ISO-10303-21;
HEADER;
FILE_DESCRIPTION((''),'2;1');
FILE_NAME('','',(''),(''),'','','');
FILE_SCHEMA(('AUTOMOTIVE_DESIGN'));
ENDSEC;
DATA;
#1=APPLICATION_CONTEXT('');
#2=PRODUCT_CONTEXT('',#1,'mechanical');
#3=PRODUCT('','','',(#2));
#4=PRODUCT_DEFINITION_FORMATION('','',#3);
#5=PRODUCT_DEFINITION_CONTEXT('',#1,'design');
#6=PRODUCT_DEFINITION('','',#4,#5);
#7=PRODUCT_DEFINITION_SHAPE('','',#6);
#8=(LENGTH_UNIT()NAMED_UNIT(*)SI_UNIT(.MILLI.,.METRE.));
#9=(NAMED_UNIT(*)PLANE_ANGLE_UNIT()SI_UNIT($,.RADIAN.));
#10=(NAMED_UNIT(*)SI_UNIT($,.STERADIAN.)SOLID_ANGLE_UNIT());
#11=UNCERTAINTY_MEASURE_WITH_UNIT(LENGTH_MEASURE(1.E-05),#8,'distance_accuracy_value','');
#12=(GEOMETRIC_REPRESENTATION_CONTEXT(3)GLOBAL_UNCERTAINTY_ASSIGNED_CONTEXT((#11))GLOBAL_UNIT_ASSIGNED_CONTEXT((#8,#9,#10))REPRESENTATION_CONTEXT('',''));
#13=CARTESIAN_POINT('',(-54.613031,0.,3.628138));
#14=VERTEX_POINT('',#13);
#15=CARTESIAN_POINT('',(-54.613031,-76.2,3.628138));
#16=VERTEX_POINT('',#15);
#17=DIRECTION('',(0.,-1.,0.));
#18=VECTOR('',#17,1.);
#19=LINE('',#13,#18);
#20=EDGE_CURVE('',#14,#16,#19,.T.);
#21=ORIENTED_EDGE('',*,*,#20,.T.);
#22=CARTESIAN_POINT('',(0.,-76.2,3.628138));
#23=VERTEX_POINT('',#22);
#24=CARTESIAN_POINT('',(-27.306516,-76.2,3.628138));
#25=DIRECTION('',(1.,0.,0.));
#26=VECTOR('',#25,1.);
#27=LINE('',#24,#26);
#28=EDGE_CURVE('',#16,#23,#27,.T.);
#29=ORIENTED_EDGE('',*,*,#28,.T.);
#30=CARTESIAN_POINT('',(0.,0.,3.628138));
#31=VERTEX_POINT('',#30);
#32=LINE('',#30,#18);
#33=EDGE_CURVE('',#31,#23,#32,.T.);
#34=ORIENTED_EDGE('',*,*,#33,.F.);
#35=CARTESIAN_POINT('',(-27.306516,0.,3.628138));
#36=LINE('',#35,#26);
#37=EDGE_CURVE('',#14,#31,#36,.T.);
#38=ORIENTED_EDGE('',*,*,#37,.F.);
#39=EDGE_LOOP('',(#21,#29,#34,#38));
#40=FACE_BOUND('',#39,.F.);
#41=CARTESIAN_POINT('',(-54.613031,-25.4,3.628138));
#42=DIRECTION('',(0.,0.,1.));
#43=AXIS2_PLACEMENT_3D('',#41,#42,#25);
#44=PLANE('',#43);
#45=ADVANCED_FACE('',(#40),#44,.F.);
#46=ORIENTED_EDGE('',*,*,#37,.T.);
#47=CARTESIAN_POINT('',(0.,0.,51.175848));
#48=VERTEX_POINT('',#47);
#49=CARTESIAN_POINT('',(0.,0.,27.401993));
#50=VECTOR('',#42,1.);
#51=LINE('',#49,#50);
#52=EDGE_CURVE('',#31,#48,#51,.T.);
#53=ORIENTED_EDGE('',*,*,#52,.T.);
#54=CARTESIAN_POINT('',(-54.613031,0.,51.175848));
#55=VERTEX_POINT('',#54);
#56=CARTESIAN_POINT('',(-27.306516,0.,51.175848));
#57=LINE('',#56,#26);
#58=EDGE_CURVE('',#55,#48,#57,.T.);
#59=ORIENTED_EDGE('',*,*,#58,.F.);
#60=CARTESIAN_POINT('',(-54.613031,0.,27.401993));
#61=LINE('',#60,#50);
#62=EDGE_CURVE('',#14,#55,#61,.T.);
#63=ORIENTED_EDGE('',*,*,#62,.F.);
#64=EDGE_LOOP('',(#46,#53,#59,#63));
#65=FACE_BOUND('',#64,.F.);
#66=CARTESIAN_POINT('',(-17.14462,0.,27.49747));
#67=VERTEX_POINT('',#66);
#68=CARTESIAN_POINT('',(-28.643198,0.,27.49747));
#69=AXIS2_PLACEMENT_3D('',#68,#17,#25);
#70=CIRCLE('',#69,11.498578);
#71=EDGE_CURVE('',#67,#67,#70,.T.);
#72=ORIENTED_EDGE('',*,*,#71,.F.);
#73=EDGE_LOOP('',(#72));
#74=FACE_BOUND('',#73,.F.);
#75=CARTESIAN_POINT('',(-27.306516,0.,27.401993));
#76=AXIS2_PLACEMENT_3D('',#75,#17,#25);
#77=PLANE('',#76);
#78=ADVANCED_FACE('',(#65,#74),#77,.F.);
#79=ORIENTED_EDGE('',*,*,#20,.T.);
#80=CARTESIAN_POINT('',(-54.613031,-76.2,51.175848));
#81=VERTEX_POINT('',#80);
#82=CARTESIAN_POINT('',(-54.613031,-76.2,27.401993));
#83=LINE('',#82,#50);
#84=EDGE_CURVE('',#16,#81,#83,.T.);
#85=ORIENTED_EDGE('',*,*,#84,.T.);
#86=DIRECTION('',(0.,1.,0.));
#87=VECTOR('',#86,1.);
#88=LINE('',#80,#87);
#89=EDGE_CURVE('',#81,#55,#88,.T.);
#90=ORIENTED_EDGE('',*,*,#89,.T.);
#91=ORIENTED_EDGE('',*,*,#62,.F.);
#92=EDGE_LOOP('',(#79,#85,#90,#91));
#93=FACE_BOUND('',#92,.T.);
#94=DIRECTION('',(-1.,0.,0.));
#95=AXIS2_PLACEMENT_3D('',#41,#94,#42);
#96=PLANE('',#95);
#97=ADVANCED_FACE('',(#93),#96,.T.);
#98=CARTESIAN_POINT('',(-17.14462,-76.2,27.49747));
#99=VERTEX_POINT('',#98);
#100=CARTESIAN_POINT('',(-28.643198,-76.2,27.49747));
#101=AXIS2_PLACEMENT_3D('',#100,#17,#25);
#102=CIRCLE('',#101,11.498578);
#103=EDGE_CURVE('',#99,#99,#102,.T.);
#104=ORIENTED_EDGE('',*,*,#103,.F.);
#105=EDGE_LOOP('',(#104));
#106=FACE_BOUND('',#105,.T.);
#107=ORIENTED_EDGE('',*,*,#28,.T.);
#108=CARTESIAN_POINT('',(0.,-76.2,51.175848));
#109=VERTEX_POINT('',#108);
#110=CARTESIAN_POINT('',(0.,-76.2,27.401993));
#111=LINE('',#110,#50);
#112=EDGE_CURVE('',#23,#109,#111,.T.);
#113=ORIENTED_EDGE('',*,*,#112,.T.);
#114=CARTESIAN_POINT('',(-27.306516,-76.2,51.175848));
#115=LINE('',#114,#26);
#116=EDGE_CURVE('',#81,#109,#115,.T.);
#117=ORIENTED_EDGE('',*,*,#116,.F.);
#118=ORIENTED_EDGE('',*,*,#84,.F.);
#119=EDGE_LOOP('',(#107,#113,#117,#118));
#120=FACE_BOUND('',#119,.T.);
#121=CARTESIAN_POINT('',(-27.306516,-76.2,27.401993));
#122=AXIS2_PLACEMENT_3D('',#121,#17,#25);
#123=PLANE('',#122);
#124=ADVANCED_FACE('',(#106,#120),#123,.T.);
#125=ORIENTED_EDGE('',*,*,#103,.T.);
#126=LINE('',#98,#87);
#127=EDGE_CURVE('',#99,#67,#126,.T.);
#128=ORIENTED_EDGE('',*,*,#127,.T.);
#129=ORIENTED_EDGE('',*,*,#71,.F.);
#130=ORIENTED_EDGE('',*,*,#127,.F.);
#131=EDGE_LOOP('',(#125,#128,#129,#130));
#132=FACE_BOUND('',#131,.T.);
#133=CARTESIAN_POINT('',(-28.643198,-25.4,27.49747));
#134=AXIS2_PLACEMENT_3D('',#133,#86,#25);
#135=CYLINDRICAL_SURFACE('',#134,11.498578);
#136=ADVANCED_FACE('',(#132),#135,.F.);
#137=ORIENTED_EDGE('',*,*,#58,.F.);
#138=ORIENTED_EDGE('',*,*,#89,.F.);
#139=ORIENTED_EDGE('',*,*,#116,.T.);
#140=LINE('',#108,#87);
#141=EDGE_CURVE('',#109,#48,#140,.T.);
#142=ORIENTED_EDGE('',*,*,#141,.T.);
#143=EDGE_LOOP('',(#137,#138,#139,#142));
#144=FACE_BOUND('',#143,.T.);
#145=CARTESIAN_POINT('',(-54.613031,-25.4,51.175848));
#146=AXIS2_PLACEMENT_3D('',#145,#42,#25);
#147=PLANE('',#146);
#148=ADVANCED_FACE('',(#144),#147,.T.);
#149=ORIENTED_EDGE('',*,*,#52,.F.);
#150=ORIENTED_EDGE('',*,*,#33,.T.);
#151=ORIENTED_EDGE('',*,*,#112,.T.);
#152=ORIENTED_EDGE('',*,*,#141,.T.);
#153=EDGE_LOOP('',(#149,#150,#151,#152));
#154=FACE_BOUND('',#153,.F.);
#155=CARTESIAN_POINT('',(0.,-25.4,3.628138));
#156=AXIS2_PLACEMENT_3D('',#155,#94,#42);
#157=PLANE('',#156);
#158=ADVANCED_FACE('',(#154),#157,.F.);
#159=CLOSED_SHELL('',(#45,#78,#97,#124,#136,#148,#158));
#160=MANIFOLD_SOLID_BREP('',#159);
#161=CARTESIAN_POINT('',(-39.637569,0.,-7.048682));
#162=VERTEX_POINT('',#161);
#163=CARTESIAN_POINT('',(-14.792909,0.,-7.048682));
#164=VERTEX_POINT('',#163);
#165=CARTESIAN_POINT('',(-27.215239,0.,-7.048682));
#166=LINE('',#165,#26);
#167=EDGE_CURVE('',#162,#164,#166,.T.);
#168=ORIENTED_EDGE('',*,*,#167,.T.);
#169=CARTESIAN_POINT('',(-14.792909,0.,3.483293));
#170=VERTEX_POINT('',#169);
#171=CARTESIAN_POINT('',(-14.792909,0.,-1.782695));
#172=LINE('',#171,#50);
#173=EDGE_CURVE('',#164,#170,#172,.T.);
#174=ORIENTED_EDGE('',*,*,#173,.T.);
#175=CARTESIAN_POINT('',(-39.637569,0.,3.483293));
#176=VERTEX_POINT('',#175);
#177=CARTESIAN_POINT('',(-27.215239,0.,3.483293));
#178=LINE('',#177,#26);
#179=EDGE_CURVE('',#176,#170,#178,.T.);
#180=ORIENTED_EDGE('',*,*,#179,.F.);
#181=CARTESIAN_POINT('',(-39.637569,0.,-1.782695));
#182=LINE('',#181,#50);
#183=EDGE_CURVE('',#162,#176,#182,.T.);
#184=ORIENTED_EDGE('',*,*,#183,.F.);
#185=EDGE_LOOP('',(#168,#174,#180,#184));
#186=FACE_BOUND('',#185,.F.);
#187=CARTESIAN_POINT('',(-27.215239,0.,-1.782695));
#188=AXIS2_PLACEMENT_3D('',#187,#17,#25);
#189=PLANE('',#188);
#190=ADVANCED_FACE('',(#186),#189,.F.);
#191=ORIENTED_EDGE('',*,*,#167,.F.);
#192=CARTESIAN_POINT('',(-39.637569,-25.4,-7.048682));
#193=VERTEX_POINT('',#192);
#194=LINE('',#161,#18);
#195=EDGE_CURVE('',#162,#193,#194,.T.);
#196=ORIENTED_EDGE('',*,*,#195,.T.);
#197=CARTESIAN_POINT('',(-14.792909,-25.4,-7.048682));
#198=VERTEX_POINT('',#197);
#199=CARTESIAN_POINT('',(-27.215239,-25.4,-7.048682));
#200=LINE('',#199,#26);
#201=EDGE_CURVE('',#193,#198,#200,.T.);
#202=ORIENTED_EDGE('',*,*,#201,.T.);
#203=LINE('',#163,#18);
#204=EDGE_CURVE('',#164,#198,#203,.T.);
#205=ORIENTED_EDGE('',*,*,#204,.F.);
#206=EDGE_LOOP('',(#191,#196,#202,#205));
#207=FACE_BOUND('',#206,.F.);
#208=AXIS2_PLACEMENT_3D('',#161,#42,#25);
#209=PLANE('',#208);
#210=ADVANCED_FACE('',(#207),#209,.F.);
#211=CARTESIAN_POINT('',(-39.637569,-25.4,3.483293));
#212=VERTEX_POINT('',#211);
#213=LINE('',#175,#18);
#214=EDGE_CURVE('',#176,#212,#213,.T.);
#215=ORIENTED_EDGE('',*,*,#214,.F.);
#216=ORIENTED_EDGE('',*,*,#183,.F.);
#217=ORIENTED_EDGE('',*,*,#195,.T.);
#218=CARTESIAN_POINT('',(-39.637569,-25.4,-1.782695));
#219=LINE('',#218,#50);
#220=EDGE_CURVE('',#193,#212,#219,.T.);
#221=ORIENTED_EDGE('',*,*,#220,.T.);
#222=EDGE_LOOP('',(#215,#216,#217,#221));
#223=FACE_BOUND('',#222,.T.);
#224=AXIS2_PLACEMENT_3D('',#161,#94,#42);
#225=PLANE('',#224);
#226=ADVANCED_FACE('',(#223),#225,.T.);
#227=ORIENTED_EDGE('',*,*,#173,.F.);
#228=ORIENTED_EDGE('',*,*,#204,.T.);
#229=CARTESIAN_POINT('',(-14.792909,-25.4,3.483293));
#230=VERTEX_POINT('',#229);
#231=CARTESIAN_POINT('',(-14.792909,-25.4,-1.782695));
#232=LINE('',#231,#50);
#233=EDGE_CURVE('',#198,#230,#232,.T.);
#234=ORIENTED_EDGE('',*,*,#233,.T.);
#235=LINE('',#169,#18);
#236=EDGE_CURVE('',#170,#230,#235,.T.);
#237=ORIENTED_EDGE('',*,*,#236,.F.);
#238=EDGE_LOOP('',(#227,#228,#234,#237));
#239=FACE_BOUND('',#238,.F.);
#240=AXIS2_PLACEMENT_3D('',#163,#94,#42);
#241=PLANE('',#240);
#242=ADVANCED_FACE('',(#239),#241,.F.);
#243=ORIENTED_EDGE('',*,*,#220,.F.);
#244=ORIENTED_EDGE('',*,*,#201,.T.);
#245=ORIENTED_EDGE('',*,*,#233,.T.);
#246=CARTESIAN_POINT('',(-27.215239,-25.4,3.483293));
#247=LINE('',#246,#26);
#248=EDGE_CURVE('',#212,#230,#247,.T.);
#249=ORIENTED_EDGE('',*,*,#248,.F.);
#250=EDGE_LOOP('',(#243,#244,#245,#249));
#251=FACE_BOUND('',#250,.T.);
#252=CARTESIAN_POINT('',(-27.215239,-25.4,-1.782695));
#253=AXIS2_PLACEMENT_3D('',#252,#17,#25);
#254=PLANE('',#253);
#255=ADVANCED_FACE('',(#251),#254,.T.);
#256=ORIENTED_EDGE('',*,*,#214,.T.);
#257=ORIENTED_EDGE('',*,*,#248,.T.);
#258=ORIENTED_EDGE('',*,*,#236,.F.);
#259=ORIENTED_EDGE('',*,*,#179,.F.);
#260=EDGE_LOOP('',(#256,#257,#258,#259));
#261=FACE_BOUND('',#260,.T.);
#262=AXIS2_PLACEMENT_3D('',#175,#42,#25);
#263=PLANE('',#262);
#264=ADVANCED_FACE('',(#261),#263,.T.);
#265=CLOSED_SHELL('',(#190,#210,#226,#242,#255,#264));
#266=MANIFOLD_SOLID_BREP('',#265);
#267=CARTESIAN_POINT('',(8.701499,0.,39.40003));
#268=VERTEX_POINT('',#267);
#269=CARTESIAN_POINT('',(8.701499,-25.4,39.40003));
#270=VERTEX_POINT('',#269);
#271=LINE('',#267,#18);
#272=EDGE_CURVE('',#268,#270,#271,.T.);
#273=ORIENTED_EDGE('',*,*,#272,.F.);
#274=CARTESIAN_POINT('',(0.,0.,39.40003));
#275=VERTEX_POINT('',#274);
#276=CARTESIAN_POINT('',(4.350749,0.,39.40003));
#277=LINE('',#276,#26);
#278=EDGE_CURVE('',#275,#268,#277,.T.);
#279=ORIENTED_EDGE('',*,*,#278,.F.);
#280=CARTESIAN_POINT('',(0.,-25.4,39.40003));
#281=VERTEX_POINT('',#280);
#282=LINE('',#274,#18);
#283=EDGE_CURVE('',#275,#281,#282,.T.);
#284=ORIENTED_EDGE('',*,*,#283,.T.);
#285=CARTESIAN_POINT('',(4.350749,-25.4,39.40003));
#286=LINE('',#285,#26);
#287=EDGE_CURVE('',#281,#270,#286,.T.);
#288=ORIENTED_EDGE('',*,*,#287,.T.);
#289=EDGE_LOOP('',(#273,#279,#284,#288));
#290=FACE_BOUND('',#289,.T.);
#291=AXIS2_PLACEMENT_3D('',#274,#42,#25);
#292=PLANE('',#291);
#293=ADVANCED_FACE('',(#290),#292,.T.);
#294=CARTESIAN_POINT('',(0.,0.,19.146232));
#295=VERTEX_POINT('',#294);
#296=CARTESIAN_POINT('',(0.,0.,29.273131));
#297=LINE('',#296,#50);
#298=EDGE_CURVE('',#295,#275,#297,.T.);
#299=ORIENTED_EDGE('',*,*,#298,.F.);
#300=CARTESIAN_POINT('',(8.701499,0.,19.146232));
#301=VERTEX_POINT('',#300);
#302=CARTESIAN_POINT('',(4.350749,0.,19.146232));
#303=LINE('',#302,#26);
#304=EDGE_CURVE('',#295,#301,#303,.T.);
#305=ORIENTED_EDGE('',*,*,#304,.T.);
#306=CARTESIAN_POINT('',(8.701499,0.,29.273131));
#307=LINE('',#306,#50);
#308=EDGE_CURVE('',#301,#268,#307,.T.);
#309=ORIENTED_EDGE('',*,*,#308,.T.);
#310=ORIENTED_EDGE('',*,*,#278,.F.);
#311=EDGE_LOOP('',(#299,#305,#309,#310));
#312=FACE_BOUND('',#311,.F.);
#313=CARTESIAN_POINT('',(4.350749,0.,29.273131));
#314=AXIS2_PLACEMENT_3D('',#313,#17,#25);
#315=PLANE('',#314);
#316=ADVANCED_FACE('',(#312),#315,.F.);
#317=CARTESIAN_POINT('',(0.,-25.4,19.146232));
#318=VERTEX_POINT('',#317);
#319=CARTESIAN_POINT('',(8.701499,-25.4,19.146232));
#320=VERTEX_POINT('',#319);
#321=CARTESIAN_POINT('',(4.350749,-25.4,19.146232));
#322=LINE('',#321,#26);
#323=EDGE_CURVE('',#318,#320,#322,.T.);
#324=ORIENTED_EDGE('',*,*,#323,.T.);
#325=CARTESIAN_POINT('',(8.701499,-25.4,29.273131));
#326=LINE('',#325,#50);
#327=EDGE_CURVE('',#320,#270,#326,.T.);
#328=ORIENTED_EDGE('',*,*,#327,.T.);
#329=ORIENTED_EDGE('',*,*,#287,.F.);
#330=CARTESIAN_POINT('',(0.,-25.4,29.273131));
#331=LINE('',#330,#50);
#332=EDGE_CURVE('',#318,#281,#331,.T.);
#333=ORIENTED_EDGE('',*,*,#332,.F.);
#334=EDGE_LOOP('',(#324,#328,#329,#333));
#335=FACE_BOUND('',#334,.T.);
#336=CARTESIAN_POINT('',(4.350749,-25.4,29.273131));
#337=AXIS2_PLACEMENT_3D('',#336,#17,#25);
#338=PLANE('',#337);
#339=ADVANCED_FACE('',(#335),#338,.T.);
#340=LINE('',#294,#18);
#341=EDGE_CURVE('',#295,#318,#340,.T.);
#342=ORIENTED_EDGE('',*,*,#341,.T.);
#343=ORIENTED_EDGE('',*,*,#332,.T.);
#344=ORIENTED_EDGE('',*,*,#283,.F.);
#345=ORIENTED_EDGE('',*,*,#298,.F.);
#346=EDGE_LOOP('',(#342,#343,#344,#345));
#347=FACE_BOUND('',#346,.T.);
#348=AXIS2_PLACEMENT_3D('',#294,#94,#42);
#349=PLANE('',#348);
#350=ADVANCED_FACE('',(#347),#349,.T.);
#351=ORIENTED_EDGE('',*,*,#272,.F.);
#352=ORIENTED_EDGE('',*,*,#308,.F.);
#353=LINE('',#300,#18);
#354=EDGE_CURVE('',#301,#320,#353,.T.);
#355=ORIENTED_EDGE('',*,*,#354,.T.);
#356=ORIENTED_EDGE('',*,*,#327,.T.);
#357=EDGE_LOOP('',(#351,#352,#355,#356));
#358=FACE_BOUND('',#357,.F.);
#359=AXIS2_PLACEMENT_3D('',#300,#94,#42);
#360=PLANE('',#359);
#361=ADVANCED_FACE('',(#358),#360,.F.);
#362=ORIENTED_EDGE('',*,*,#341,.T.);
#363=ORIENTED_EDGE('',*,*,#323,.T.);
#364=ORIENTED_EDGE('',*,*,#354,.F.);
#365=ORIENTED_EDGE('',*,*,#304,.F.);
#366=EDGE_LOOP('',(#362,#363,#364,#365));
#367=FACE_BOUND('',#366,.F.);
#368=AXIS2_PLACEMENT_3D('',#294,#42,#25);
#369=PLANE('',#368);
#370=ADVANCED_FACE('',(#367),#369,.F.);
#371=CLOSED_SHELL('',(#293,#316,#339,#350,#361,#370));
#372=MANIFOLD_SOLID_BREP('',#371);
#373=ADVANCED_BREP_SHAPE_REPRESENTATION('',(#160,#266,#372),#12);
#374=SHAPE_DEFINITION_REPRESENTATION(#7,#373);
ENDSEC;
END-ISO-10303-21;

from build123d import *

# Parameters (mm, degrees)
F1_W     = 8.7014986202
F1_H     = 20.2537979931
F2_DEPTH = 25.4
F1_W_2   = 24.8446604237
F1_H_2   = 10.5319754221
F0_W     = 54.6130314469
F0_H     = 47.5477091968
F0_R     = 11.4985783996
F3_DEPTH = 50.8


with BuildPart() as f2:
    # F1 (on Front) → F2 (new body)
    with BuildSketch(Plane.XZ):
        with Locations((4.3507493101, 29.273130931)):
            Rectangle(F1_W, F1_H)
    extrude(amount=F2_DEPTH)


with BuildPart() as f2b:
    # F1 (on Front) → F2, piece 2 (new body)
    with BuildSketch(Plane.XZ):
        with Locations((-27.2152391262, -1.7826945987)):
            Rectangle(F1_W_2, F1_H_2)
    extrude(amount=F2_DEPTH)


with BuildPart() as f2c:
    # F0 (on Front) → F2, piece 3 (new body)
    with BuildSketch(Plane.XZ):
        with Locations((-27.3065157235, 27.4019930512)):
            Rectangle(F0_W, F0_H)
        with Locations((-28.6431983113, 27.4974703789)):
            Circle(F0_R, mode=Mode.SUBTRACT)
    extrude(amount=F2_DEPTH)

    # F3 (add): a face of the model
    f3_faces = [f2c.faces().sort_by_distance(p)[0] for p in [
        (-27.3065157235, -25.4, 50.4517366185),
    ]]
    extrude(f3_faces, amount=F3_DEPTH)


solid = Compound([f2.part, f2b.part, f2c.part])
